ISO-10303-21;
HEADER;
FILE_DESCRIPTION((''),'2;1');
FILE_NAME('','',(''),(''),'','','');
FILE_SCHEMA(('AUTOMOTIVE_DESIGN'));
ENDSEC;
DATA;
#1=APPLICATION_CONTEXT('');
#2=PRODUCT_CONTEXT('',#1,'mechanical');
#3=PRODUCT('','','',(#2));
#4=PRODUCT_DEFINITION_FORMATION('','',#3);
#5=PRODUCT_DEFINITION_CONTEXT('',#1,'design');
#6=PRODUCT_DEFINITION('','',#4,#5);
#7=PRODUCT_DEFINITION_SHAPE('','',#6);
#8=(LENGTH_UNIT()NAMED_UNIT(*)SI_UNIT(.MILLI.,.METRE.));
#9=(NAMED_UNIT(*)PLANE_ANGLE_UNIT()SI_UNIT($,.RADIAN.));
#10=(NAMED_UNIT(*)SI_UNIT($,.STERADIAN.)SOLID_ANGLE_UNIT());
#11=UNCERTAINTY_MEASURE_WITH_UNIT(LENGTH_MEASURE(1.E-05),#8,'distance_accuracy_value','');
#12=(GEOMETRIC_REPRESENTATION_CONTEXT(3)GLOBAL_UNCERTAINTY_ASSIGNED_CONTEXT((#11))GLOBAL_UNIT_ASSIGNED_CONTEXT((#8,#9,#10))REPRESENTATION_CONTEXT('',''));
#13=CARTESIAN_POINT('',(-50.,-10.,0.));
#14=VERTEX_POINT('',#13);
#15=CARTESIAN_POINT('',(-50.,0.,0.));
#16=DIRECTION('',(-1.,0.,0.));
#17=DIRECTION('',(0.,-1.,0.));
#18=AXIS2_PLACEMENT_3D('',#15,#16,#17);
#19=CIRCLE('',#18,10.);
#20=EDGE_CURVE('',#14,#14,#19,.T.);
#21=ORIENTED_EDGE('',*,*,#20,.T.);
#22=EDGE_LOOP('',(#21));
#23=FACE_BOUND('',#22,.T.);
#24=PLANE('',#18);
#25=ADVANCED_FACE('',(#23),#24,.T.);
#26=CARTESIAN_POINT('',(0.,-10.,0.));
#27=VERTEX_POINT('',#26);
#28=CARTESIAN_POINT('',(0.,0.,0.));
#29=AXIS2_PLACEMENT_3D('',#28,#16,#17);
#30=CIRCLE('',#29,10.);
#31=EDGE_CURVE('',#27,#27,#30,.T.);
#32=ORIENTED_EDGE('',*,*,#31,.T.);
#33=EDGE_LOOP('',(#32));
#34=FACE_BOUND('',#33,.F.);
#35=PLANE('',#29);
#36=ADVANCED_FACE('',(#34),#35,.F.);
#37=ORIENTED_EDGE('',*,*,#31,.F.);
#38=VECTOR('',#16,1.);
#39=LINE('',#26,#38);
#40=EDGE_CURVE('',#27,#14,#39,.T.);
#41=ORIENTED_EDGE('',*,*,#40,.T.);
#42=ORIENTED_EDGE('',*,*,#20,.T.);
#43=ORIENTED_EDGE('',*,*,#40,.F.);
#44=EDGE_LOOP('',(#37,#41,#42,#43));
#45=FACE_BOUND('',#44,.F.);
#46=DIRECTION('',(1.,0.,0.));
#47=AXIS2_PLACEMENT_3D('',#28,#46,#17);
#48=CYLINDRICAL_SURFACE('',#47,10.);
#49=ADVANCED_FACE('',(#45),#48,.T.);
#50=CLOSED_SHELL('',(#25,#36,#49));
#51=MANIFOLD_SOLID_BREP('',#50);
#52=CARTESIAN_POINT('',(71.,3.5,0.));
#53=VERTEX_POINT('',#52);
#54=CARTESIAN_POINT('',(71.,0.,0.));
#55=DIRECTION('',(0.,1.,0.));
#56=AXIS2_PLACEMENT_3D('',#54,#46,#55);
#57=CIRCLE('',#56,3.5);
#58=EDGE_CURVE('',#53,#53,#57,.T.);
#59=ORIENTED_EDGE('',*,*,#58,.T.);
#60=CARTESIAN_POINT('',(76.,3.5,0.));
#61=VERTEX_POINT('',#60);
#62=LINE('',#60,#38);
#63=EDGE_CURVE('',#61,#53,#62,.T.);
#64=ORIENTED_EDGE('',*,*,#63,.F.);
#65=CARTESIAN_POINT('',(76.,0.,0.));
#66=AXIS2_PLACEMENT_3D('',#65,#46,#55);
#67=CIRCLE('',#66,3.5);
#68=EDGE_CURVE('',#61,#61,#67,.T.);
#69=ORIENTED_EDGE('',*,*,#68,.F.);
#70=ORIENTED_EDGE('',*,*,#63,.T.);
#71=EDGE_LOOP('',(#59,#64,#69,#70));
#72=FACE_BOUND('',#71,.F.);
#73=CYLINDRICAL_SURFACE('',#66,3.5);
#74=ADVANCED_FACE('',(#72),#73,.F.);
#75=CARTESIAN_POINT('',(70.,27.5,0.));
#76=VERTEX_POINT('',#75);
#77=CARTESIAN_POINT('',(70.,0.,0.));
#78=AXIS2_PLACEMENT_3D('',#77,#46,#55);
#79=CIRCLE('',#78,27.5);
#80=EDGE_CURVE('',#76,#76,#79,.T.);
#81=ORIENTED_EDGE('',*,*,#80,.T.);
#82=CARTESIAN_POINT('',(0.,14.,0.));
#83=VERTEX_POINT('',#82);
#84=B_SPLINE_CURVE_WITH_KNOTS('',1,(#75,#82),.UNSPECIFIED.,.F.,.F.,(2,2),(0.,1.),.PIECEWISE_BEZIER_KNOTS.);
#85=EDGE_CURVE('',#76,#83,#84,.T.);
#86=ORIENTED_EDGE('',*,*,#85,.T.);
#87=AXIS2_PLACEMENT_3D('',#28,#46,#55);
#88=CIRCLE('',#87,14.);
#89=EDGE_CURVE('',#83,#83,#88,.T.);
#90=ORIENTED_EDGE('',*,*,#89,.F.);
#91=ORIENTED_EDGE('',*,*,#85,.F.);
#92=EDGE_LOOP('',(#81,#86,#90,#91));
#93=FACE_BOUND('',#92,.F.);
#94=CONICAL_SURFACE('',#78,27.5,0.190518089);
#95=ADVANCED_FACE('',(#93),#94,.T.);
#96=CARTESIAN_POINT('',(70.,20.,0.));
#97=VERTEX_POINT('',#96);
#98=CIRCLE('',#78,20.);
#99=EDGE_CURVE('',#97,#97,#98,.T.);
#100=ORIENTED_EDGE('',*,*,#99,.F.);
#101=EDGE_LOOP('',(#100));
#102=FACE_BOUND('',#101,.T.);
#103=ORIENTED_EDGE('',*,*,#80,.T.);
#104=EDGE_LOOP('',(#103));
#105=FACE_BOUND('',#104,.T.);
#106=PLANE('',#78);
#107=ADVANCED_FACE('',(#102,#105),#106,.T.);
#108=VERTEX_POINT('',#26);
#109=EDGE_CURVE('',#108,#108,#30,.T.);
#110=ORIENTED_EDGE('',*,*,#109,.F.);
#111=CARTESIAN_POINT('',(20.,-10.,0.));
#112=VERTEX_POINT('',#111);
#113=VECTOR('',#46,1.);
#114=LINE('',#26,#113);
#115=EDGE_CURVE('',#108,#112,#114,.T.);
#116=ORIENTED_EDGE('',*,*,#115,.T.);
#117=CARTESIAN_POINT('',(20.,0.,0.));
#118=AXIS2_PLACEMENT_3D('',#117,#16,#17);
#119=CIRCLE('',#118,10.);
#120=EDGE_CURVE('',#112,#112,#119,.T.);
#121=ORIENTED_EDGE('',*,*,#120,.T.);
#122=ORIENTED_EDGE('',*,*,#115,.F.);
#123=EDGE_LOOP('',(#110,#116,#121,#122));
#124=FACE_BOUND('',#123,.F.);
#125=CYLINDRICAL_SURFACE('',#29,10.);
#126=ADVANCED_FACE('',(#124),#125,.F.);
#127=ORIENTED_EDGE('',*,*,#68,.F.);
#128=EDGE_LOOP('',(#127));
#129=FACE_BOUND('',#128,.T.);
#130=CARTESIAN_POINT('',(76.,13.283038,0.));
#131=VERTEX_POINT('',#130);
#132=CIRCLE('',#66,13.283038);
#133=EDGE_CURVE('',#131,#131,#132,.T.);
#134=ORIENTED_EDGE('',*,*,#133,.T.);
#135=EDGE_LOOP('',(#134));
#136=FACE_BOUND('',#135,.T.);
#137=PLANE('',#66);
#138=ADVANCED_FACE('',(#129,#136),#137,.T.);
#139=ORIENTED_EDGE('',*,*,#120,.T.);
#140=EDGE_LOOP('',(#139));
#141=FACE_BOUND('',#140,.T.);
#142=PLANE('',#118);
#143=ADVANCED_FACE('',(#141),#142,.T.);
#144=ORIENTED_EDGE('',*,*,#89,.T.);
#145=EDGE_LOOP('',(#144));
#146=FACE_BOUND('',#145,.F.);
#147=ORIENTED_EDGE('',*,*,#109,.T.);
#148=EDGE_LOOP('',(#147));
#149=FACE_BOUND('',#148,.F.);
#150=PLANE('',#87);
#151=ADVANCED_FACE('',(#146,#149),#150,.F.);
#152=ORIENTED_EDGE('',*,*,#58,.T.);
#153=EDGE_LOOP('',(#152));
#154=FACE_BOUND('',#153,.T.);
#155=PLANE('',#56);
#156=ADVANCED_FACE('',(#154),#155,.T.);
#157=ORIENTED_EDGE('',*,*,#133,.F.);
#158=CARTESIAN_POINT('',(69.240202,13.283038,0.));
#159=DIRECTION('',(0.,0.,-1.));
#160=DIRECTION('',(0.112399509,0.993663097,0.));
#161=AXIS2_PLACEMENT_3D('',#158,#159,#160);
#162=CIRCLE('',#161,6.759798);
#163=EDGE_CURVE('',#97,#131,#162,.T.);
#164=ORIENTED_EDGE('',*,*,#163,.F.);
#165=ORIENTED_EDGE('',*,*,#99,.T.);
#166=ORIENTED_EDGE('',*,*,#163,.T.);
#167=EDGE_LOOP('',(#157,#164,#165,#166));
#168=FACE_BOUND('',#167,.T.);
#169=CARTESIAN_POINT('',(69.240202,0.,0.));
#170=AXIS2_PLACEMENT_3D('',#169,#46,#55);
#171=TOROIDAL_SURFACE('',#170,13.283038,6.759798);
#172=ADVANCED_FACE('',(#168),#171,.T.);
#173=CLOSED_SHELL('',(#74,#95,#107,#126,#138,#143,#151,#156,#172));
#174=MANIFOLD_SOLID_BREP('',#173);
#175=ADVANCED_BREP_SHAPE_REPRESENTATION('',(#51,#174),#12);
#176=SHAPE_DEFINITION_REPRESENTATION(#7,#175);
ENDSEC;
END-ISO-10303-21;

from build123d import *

# Parameters (mm, degrees)
F1_R      = 27.5
F2_R      = 14
F4_R      = 20
F5_DEPTH  = 6
F7_R      = 3.5
F8_DEPTH  = 5
F9_R      = 10
F10_DEPTH = 50
F11_DEPTH = 20


# Not quite as in the source:
# - a fillet or chamfer that OpenCascade refuses, or shapes differently, is made with other operations: its cross-section is extruded or revolved along the edge and cut away or added


with BuildPart() as f3:
    # F1 (on offset) → F3 section 0
    with BuildSketch(Plane.YZ.offset(70)):
        Circle(F1_R)
    # F2 (on Right) → F3 section 1
    with BuildSketch(Plane.YZ):
        Circle(F2_R)
    loft()

    # F4 (on face) → F5 (join)
    with BuildSketch(Plane.YZ.offset(70)):
        Circle(F4_R)
    extrude(amount=F5_DEPTH)

    # F6: fillet of radius 6.7597979746 on 1 edges, made by hand

    # F6_s1 → F6_t2 (revolve, cut)
    with BuildSketch(Plane.XY):
        with BuildLine():
            ThreePointArc((70, 20), (74.2815782992, 17.7863030167), (76, 13.2830382094))
            Line((76, 13.2830382094), (76, 20))
            Line((76, 20), (70, 20))
        make_face()
    revolve(axis=Axis((76, 0, 0), (1, 0, 0)), mode=Mode.SUBTRACT)

    # F7 (on face) → F8 (cut)
    with BuildSketch(Plane.YZ.offset(76)):
        Circle(F7_R)
    extrude(amount=-F8_DEPTH, mode=Mode.SUBTRACT)

    # F9 (on face) → F11 (cut)
    with BuildSketch(Plane(origin=(0, 0, 0), x_dir=(0, -1, 0), z_dir=(-1, 0, 0))):
        Circle(F9_R)
    extrude(amount=-F11_DEPTH, mode=Mode.SUBTRACT)


with BuildPart() as f10:
    # F9 (on face) → F10 (new body)
    with BuildSketch(Plane(origin=(0, 0, 0), x_dir=(0, -1, 0), z_dir=(-1, 0, 0))):
        Circle(F9_R)
    extrude(amount=F10_DEPTH)


solid = Compound([f3.part, f10.part])
